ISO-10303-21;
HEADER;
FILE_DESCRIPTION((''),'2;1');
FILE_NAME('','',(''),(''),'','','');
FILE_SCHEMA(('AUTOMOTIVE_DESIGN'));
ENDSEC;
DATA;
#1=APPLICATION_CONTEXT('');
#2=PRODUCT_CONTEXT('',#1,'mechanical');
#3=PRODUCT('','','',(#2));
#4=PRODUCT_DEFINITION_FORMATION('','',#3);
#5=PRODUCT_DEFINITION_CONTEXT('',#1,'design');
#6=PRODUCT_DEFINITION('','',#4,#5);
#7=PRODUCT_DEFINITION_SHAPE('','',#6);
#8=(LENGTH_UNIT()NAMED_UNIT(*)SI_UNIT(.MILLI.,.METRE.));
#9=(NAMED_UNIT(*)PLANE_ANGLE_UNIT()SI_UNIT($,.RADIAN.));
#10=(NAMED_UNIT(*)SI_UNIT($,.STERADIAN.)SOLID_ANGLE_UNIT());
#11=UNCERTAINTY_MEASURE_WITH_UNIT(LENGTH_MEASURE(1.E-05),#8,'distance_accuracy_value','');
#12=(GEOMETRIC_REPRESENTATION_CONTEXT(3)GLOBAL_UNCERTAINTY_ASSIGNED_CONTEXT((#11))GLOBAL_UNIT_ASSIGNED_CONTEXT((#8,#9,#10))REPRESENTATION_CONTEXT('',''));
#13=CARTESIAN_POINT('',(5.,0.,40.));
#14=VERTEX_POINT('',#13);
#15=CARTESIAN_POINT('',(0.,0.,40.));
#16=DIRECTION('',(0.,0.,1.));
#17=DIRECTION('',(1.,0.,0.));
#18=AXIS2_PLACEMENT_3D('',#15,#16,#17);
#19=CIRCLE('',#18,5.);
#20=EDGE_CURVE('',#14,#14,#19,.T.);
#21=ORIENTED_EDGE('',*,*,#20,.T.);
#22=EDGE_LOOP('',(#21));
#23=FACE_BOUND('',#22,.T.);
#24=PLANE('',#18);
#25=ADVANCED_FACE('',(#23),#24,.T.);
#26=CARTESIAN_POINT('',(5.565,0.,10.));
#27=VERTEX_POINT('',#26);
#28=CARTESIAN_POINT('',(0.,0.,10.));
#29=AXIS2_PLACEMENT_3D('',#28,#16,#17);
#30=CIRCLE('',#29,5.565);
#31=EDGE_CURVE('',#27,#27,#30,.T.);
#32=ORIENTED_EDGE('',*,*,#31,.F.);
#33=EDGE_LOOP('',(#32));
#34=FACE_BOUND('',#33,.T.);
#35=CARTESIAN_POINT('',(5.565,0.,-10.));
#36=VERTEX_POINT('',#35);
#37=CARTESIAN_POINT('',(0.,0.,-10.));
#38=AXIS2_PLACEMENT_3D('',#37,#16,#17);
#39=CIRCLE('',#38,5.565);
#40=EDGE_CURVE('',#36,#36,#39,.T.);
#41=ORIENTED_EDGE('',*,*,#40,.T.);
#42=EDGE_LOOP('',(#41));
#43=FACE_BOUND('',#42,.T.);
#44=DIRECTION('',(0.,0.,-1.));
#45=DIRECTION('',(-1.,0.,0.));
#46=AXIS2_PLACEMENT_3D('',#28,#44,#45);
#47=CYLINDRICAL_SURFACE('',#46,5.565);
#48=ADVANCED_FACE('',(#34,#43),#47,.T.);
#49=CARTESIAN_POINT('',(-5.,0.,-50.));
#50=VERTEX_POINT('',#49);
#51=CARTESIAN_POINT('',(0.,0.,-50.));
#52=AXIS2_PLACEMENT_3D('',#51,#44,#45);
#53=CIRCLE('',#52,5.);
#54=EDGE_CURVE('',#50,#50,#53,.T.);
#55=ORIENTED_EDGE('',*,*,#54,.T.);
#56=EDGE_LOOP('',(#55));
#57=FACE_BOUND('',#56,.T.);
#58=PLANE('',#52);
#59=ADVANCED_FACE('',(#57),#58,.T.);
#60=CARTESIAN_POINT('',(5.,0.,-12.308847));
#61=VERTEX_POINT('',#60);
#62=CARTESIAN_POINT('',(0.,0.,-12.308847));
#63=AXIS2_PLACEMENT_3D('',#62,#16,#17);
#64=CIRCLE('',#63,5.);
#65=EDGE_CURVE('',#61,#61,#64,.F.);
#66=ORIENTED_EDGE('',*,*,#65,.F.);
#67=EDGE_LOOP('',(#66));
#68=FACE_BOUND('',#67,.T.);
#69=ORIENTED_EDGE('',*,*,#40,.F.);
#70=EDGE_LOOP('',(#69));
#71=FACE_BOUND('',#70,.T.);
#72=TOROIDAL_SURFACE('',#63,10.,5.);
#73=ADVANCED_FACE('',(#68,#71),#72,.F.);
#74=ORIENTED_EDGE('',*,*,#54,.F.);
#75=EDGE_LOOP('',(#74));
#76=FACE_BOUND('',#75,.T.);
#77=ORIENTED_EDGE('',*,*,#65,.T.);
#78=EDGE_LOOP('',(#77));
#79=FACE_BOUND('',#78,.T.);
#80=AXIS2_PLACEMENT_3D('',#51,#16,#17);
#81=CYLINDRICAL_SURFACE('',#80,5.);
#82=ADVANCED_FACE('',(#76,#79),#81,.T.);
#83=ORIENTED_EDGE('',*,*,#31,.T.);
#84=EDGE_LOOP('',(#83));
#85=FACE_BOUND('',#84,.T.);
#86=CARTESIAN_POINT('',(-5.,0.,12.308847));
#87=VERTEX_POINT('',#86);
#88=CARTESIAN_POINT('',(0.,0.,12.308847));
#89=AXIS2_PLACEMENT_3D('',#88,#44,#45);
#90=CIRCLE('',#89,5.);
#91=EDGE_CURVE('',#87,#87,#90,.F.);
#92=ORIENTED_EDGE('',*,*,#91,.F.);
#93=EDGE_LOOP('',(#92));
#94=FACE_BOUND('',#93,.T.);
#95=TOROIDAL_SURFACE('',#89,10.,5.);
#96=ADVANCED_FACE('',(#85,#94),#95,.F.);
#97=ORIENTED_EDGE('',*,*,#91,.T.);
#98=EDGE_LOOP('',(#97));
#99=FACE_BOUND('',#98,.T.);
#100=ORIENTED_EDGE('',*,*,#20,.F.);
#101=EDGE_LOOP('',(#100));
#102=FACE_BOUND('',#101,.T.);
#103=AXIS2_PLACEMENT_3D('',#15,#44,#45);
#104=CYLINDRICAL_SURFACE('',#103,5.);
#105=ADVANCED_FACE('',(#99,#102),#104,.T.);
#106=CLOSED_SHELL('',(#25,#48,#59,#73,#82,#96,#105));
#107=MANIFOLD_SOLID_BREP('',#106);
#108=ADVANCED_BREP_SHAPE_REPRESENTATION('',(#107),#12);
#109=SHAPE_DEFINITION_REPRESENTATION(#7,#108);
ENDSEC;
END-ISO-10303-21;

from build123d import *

# Parameters (mm, degrees)
SKETCH1_R           = 5.565
BOSS_EXTRUDE1_DEPTH = 10
SKETCH2_R           = 5
BOSS_EXTRUDE2_DEPTH = 30
BOSS_EXTRUDE3_START = 40
SKETCH3_R           = 5
BOSS_EXTRUDE3_DEPTH = 40
FILLET2_R           = 5


with BuildPart() as part:
    # Sketch1 → Boss-Extrude1 (new, symmetric)
    with BuildSketch(Plane.XY):
        Circle(SKETCH1_R)
    extrude(amount=BOSS_EXTRUDE1_DEPTH, both=True)

    # Sketch2 → Boss-Extrude2 (add)
    with BuildSketch(Plane.XY.offset(10)):
        Circle(SKETCH2_R)
    extrude(amount=BOSS_EXTRUDE2_DEPTH)

    # Sketch3 → Boss-Extrude3 (add)
    with BuildSketch(Plane(origin=(0, 0, -10), x_dir=(-1, 0, 0), z_dir=(0, 0, -1)).offset(BOSS_EXTRUDE3_START)):
        with Locations(Location((0, 0, 0), (0, 0, 180))):
            Circle(SKETCH3_R)
    extrude(amount=-BOSS_EXTRUDE3_DEPTH)

    # Fillet2
    # the kernel refuses this fillet: 5 mm, written as the material it adds along each edge
    with BuildSketch(Plane(origin=(0, 0, 10), x_dir=(1, 0, 0), z_dir=(0, -1, 0))) as fillet2_piece_1:
        with BuildLine():
            CenterArc((10, 2.308847115), FILLET2_R, 180, 27.501344198)
            Line((5, 2.308847115), (4.9, 2.308847115))
            Line((4.9, 2.308847115), (4.9, 0))
            Line((4.9, 0), (5, -0.1))
            ThreePointArc((5, -0.1), (5.2825, -0.1), (5.4763, -0.046176942))
            Line((5.4763, -0.046176942), (5.565, 0))
        make_face()
    revolve(axis=Axis((0, 0, 10), (0, 0, 1)))
    with BuildSketch(Plane(origin=(0, 0, -10), x_dir=(1, 0, 0), z_dir=(0, 1, 0))) as fillet2_piece_2:
        with BuildLine():
            CenterArc((10, 2.308847115), FILLET2_R, 180, 27.501344198)
            Line((5, 2.308847115), (4.9, 2.308847115))
            Line((4.9, 2.308847115), (4.9, 0))
            Line((4.9, 0), (5, -0.1))
            ThreePointArc((5, -0.1), (5.2825, -0.1), (5.4763, -0.046176942))
            Line((5.4763, -0.046176942), (5.565, 0))
        make_face()
    revolve(axis=Axis((0, 0, -10), (0, 0, -1)))


solid = part.part
